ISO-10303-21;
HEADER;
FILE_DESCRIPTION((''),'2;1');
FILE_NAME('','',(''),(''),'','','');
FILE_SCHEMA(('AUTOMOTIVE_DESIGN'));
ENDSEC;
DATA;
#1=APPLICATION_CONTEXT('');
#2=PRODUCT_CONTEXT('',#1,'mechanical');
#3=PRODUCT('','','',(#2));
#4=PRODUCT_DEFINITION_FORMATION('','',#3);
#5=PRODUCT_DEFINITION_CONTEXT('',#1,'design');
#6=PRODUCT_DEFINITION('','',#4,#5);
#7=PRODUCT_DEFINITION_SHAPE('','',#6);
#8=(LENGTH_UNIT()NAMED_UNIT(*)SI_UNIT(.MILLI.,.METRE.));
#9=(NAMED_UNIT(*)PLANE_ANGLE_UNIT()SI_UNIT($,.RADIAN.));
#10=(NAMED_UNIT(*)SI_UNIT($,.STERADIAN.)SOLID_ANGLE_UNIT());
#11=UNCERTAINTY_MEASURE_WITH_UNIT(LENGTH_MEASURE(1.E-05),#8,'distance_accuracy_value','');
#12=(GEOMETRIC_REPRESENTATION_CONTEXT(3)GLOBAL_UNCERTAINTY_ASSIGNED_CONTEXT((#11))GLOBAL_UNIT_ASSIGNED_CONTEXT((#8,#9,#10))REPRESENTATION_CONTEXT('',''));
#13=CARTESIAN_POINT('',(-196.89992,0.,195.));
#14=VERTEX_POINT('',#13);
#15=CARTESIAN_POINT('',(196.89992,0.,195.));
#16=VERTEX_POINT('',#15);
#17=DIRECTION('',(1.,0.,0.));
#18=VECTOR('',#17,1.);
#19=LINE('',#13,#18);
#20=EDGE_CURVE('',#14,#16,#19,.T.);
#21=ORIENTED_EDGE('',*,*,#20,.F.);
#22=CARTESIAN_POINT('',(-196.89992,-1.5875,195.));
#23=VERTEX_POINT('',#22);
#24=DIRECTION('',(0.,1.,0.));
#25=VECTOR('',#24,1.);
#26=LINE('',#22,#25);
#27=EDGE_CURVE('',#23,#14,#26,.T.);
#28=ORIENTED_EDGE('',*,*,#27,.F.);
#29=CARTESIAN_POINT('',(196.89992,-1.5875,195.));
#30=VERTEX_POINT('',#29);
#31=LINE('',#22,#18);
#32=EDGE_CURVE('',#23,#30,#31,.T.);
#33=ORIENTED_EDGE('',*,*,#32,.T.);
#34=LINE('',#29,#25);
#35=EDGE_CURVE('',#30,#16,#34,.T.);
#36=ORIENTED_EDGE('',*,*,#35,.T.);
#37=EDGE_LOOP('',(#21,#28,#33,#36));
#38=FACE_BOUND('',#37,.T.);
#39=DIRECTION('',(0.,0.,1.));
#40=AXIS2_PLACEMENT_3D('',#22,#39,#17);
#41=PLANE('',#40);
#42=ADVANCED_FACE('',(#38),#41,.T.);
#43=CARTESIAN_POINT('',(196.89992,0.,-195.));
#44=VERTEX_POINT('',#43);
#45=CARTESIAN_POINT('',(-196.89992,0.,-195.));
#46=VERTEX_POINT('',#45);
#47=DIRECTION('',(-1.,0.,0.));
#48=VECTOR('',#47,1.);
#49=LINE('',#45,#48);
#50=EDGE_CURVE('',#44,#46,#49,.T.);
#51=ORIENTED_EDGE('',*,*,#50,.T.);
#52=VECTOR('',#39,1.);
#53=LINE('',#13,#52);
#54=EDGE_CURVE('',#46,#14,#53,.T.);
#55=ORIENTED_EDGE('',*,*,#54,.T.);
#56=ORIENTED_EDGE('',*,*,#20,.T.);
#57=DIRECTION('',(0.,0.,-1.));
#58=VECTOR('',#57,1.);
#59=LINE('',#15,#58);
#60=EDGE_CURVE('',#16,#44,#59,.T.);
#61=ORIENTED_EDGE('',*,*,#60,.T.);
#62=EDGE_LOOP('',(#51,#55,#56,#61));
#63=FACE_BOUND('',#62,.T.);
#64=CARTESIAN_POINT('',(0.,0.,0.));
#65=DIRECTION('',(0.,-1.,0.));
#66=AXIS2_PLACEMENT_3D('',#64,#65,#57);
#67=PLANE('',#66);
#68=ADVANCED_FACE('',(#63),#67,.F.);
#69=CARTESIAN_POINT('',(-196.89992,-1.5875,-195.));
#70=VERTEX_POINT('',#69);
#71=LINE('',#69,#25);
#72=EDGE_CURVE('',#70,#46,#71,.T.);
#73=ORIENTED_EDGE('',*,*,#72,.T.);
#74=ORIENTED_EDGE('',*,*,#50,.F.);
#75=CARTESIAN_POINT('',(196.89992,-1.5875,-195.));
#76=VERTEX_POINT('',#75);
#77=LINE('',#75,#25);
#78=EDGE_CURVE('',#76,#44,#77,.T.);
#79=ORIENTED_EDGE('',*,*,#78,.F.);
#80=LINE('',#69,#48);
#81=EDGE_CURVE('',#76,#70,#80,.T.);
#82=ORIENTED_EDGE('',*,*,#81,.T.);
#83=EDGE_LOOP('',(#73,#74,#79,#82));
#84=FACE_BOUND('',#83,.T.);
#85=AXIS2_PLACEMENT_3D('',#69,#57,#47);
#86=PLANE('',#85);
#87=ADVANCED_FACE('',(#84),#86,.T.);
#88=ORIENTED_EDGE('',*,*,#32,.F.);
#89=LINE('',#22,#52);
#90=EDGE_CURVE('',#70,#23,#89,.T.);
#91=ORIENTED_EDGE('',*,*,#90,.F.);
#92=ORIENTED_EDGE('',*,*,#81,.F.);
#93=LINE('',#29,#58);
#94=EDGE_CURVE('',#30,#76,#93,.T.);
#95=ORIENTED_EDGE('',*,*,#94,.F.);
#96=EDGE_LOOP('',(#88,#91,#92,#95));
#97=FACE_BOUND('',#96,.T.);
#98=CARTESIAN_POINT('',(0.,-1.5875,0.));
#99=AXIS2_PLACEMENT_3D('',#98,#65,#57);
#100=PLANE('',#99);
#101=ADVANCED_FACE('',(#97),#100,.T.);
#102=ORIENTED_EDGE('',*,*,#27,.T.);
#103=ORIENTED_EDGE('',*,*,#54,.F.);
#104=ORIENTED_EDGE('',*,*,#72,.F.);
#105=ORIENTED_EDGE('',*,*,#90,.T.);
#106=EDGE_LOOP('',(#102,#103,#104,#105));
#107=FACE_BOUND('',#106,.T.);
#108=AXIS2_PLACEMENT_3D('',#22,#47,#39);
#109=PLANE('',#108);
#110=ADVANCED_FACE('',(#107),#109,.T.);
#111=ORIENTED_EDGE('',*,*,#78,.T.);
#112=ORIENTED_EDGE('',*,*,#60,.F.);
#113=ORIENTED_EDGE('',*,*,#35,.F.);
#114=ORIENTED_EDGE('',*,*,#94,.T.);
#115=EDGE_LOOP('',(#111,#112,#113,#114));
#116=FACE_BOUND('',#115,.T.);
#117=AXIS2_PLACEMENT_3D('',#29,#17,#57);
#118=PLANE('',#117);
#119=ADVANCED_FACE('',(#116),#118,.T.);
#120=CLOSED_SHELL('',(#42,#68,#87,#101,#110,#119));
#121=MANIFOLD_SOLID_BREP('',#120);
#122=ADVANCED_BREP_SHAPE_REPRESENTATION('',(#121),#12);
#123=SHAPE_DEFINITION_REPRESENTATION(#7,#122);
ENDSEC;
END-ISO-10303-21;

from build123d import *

# Parameters (mm, degrees)
SKETCH1_W          = 393.79984
SKETCH1_H          = 390
BASE_FLANGE1_DEPTH = 1.5875


# Sheet-metal steps are written as plain solids
with BuildPart() as part:
    # Sketch1 → Base-Flange1 (new body)
    with BuildSketch(Plane(origin=(0, 0, 0), x_dir=(1, 0, 0), z_dir=(0, 1, 0))):
        Rectangle(SKETCH1_W, SKETCH1_H)
    extrude(amount=-BASE_FLANGE1_DEPTH)


solid = part.part
